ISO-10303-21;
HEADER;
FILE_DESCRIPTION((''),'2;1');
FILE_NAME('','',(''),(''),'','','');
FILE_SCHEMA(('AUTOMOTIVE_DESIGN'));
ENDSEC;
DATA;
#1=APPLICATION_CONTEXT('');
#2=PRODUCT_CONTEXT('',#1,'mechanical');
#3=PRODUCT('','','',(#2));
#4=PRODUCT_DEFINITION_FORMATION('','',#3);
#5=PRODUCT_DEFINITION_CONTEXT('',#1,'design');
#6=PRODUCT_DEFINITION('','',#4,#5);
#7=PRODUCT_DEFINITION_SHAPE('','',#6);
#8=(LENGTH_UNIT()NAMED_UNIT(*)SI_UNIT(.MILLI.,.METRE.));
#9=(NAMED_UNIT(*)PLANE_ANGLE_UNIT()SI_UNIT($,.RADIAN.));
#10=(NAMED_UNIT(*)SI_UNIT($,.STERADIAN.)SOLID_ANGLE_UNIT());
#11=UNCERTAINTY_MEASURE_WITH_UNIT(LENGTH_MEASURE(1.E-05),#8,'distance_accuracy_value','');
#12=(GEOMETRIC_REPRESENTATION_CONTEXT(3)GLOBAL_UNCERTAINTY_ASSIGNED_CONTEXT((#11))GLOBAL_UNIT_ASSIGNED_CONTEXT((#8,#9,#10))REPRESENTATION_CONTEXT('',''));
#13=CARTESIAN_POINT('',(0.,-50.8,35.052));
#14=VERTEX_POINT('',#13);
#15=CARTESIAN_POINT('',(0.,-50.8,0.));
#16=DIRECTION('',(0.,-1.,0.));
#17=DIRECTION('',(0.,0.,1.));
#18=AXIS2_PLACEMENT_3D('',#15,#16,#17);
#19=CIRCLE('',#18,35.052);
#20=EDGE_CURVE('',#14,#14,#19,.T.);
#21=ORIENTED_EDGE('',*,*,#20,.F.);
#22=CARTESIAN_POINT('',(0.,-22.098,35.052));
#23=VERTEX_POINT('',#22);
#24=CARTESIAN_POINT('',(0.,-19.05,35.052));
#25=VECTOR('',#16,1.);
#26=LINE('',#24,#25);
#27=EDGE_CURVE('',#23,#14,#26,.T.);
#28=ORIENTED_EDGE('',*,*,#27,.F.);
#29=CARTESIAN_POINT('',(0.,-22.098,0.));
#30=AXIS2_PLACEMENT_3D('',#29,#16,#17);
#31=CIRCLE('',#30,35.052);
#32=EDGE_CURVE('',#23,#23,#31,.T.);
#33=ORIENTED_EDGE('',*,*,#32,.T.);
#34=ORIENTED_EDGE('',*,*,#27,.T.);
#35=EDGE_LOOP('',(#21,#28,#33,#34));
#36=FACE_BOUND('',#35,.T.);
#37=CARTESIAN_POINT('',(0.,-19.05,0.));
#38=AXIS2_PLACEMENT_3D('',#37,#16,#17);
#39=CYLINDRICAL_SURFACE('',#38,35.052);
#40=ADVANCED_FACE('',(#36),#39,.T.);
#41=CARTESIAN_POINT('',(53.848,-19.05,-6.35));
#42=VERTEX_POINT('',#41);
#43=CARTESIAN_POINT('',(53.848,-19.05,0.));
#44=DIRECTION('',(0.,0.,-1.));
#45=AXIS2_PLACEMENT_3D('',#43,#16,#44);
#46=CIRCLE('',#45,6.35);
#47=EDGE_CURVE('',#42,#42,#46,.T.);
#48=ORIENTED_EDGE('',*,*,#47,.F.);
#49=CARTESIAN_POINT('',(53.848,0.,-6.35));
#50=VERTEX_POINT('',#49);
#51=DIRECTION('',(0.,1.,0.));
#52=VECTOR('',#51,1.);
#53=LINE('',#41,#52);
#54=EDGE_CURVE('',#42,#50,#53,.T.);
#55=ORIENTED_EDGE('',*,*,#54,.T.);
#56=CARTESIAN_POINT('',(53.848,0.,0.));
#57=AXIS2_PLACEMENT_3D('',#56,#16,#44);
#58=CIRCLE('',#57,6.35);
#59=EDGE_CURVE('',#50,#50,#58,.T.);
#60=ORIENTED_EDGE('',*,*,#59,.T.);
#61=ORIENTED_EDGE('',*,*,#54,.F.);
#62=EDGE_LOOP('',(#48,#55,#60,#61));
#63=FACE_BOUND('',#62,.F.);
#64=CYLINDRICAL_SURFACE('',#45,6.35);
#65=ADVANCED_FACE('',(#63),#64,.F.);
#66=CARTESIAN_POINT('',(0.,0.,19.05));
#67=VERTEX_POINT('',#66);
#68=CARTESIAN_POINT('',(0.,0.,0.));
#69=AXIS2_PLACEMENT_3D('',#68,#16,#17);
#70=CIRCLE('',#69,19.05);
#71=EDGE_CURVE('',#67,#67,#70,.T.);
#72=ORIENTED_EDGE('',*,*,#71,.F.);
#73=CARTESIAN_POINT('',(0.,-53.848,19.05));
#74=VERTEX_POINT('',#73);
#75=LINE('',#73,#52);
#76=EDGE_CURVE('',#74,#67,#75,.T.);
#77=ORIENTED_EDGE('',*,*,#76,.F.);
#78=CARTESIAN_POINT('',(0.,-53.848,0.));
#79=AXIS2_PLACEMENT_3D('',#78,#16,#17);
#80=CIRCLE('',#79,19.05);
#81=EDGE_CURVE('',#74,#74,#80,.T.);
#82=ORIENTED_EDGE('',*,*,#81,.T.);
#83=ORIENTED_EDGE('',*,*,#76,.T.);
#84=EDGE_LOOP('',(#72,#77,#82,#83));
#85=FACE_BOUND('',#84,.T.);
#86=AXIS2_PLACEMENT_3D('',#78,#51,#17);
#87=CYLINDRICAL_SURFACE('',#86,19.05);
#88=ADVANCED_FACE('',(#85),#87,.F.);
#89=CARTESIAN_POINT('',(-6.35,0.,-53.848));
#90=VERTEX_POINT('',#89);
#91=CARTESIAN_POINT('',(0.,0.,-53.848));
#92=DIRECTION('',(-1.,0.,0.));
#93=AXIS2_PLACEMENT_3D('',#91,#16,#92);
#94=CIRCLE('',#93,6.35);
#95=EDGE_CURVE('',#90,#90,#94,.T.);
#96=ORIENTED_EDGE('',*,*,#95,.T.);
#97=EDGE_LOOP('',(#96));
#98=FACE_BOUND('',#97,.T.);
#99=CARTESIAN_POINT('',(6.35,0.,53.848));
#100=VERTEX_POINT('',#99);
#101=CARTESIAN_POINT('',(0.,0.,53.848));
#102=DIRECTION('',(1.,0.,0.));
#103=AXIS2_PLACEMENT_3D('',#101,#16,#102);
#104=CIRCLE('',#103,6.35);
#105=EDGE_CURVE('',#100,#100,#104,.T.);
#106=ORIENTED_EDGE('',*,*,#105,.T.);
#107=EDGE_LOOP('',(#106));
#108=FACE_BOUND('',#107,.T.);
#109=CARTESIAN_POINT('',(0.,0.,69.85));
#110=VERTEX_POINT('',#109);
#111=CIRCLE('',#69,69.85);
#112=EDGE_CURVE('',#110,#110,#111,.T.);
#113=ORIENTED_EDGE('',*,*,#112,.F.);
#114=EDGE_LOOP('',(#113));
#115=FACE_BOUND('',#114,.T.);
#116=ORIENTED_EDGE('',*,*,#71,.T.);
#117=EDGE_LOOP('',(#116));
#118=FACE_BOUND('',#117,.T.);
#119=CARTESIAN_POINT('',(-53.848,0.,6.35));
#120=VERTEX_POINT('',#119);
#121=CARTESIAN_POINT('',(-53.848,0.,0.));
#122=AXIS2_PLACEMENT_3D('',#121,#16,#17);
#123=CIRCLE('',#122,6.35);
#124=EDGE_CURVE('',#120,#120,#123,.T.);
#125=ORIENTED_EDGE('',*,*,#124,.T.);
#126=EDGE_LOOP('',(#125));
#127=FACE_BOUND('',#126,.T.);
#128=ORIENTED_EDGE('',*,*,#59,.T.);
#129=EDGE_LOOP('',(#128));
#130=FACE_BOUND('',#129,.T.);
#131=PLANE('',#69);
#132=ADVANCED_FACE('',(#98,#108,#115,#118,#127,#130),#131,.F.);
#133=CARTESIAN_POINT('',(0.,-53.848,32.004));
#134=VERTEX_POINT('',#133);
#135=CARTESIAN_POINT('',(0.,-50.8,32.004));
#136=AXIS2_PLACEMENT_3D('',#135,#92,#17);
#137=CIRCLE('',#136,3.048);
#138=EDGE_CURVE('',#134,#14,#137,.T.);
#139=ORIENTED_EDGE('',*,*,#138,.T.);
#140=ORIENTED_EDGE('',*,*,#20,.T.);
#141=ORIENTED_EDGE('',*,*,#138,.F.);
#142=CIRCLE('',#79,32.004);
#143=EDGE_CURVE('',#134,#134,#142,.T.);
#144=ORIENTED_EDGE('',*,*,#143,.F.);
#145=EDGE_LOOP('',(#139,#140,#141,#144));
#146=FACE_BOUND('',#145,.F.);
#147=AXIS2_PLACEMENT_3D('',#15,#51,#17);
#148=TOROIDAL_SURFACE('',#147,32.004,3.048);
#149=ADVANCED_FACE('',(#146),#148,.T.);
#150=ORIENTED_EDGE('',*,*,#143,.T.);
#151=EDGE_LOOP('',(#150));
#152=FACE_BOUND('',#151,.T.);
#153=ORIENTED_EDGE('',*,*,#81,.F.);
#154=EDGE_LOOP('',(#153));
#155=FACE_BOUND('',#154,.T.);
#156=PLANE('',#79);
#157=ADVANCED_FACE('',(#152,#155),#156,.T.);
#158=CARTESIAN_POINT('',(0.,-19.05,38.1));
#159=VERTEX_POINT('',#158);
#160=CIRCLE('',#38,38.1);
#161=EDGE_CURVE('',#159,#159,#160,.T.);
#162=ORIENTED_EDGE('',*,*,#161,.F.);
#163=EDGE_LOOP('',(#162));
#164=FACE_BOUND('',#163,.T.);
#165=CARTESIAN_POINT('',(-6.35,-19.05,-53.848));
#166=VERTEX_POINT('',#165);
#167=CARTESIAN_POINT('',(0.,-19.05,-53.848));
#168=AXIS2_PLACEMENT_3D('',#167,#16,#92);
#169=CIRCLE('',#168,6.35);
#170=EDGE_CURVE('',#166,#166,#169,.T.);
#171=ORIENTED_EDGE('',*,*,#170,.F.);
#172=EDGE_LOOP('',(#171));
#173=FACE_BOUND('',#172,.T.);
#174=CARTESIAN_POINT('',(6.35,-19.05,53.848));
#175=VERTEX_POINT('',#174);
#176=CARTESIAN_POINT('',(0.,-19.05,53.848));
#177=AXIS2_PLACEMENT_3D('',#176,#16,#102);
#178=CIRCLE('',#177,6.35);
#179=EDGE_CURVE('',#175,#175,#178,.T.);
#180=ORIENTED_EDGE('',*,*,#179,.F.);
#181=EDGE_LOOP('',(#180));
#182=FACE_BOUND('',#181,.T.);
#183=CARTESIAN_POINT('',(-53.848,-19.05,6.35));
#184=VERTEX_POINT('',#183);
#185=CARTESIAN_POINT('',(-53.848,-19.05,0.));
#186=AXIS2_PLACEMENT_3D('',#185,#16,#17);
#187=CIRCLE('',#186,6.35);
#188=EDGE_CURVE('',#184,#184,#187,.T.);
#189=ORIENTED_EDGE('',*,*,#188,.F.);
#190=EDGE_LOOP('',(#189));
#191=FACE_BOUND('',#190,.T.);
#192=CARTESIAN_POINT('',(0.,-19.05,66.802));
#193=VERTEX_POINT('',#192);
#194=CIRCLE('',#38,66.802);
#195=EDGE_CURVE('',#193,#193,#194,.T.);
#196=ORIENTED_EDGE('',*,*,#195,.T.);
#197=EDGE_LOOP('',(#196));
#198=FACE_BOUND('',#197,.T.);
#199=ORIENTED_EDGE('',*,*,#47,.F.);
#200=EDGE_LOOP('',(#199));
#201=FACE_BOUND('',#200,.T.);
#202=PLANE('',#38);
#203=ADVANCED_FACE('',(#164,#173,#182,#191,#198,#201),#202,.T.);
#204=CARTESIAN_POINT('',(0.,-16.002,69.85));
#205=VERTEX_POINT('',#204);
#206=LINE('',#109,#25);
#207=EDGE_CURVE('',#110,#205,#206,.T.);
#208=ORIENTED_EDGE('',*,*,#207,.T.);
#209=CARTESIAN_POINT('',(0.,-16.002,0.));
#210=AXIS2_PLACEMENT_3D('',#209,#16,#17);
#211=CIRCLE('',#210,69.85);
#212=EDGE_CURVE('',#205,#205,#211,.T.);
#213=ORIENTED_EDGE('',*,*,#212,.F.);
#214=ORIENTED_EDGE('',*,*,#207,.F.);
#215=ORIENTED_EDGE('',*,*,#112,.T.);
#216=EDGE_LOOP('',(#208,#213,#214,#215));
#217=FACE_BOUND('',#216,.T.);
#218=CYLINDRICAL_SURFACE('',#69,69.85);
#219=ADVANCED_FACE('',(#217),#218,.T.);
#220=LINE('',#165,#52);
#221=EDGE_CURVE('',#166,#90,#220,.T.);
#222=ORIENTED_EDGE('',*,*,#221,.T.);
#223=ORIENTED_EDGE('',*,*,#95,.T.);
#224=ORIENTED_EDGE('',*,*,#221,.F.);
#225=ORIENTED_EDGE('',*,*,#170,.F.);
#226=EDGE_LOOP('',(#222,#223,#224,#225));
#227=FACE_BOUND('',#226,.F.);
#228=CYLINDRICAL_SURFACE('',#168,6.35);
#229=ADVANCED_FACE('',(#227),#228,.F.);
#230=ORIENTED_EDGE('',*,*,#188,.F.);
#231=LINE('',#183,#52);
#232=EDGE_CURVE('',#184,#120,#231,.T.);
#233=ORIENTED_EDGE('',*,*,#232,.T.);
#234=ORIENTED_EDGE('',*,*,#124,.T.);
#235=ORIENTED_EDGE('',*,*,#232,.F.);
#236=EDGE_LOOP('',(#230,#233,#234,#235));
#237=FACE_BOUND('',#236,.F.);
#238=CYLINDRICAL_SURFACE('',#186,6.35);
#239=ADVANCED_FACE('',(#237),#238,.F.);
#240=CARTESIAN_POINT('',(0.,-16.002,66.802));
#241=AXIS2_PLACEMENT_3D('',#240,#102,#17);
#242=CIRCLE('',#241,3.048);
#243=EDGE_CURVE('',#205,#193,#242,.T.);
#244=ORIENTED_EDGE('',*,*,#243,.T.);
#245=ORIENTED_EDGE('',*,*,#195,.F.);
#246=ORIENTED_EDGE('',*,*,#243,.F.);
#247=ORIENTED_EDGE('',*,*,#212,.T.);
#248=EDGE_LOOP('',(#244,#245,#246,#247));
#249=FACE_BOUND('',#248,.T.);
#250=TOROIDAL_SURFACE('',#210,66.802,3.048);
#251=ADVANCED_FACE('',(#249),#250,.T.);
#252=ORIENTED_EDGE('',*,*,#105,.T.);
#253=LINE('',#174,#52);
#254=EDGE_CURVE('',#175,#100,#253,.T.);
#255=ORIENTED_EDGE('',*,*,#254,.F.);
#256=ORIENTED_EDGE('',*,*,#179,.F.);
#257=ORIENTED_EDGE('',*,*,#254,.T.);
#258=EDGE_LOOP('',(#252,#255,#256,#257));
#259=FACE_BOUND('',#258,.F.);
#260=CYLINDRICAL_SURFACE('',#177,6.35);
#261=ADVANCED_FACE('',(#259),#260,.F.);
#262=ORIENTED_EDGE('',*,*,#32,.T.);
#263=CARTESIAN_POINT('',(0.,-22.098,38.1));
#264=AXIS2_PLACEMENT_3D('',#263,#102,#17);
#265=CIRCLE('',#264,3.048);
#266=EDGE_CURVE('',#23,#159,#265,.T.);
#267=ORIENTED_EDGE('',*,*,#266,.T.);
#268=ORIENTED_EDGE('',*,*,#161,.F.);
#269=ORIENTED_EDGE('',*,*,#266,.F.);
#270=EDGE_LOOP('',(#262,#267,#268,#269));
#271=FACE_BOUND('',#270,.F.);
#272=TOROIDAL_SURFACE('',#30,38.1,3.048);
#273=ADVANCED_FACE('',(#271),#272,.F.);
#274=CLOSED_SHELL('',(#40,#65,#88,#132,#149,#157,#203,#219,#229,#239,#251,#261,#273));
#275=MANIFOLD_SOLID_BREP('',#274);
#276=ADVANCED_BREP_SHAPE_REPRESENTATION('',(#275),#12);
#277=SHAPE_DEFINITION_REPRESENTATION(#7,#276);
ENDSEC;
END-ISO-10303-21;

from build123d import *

# Parameters (mm, degrees)
F2_R            = 6.35
F3_DEPTH        = 19.051
F3_COPIES_COUNT = 4
F4_R            = 3.048


# Not quite as in the source:
# - a pattern or mirror of a feature is missing from the dataset's text; its kind, count and spacing are read off the source's solid


with BuildPart() as f1:
    # F0 (on Right) → F1 (revolve)
    with BuildSketch(Plane.YZ):
        Polygon((-53.848, 19.05), (0, 19.05), (0, 69.85), (-19.05, 69.85), (-19.05, 35.052), (-53.848, 35.052), align=None)
    revolve(axis=Axis((0, -55.1984038566, 0), (0, -1, 0)))

    # F2 (on face) → F3 (cut, through all)
    with BuildSketch(Plane.XZ.offset(19.05)):
        with Locations((0, 53.848)):
            Circle(F2_R)
    f3 = extrude(amount=-F3_DEPTH, mode=Mode.SUBTRACT)

    # F3_copies: F3 ×4 about axis
    f3_copies_axis = Axis((0, 0, 0), (0, 1, 0))
    for i in range(1, F3_COPIES_COUNT):
        add(f3.rotate(f3_copies_axis, i * 360 / F3_COPIES_COUNT), mode=Mode.SUBTRACT)

    # F4
    f4_edges = [f1.edges().sort_by_distance(p)[0] for p in [
        (0, -19.05, -69.85),
        (0, -19.05, -35.052),
        (0, -53.848, -35.052),
    ]]
    fillet(f4_edges, radius=F4_R)


solid = f1.part
